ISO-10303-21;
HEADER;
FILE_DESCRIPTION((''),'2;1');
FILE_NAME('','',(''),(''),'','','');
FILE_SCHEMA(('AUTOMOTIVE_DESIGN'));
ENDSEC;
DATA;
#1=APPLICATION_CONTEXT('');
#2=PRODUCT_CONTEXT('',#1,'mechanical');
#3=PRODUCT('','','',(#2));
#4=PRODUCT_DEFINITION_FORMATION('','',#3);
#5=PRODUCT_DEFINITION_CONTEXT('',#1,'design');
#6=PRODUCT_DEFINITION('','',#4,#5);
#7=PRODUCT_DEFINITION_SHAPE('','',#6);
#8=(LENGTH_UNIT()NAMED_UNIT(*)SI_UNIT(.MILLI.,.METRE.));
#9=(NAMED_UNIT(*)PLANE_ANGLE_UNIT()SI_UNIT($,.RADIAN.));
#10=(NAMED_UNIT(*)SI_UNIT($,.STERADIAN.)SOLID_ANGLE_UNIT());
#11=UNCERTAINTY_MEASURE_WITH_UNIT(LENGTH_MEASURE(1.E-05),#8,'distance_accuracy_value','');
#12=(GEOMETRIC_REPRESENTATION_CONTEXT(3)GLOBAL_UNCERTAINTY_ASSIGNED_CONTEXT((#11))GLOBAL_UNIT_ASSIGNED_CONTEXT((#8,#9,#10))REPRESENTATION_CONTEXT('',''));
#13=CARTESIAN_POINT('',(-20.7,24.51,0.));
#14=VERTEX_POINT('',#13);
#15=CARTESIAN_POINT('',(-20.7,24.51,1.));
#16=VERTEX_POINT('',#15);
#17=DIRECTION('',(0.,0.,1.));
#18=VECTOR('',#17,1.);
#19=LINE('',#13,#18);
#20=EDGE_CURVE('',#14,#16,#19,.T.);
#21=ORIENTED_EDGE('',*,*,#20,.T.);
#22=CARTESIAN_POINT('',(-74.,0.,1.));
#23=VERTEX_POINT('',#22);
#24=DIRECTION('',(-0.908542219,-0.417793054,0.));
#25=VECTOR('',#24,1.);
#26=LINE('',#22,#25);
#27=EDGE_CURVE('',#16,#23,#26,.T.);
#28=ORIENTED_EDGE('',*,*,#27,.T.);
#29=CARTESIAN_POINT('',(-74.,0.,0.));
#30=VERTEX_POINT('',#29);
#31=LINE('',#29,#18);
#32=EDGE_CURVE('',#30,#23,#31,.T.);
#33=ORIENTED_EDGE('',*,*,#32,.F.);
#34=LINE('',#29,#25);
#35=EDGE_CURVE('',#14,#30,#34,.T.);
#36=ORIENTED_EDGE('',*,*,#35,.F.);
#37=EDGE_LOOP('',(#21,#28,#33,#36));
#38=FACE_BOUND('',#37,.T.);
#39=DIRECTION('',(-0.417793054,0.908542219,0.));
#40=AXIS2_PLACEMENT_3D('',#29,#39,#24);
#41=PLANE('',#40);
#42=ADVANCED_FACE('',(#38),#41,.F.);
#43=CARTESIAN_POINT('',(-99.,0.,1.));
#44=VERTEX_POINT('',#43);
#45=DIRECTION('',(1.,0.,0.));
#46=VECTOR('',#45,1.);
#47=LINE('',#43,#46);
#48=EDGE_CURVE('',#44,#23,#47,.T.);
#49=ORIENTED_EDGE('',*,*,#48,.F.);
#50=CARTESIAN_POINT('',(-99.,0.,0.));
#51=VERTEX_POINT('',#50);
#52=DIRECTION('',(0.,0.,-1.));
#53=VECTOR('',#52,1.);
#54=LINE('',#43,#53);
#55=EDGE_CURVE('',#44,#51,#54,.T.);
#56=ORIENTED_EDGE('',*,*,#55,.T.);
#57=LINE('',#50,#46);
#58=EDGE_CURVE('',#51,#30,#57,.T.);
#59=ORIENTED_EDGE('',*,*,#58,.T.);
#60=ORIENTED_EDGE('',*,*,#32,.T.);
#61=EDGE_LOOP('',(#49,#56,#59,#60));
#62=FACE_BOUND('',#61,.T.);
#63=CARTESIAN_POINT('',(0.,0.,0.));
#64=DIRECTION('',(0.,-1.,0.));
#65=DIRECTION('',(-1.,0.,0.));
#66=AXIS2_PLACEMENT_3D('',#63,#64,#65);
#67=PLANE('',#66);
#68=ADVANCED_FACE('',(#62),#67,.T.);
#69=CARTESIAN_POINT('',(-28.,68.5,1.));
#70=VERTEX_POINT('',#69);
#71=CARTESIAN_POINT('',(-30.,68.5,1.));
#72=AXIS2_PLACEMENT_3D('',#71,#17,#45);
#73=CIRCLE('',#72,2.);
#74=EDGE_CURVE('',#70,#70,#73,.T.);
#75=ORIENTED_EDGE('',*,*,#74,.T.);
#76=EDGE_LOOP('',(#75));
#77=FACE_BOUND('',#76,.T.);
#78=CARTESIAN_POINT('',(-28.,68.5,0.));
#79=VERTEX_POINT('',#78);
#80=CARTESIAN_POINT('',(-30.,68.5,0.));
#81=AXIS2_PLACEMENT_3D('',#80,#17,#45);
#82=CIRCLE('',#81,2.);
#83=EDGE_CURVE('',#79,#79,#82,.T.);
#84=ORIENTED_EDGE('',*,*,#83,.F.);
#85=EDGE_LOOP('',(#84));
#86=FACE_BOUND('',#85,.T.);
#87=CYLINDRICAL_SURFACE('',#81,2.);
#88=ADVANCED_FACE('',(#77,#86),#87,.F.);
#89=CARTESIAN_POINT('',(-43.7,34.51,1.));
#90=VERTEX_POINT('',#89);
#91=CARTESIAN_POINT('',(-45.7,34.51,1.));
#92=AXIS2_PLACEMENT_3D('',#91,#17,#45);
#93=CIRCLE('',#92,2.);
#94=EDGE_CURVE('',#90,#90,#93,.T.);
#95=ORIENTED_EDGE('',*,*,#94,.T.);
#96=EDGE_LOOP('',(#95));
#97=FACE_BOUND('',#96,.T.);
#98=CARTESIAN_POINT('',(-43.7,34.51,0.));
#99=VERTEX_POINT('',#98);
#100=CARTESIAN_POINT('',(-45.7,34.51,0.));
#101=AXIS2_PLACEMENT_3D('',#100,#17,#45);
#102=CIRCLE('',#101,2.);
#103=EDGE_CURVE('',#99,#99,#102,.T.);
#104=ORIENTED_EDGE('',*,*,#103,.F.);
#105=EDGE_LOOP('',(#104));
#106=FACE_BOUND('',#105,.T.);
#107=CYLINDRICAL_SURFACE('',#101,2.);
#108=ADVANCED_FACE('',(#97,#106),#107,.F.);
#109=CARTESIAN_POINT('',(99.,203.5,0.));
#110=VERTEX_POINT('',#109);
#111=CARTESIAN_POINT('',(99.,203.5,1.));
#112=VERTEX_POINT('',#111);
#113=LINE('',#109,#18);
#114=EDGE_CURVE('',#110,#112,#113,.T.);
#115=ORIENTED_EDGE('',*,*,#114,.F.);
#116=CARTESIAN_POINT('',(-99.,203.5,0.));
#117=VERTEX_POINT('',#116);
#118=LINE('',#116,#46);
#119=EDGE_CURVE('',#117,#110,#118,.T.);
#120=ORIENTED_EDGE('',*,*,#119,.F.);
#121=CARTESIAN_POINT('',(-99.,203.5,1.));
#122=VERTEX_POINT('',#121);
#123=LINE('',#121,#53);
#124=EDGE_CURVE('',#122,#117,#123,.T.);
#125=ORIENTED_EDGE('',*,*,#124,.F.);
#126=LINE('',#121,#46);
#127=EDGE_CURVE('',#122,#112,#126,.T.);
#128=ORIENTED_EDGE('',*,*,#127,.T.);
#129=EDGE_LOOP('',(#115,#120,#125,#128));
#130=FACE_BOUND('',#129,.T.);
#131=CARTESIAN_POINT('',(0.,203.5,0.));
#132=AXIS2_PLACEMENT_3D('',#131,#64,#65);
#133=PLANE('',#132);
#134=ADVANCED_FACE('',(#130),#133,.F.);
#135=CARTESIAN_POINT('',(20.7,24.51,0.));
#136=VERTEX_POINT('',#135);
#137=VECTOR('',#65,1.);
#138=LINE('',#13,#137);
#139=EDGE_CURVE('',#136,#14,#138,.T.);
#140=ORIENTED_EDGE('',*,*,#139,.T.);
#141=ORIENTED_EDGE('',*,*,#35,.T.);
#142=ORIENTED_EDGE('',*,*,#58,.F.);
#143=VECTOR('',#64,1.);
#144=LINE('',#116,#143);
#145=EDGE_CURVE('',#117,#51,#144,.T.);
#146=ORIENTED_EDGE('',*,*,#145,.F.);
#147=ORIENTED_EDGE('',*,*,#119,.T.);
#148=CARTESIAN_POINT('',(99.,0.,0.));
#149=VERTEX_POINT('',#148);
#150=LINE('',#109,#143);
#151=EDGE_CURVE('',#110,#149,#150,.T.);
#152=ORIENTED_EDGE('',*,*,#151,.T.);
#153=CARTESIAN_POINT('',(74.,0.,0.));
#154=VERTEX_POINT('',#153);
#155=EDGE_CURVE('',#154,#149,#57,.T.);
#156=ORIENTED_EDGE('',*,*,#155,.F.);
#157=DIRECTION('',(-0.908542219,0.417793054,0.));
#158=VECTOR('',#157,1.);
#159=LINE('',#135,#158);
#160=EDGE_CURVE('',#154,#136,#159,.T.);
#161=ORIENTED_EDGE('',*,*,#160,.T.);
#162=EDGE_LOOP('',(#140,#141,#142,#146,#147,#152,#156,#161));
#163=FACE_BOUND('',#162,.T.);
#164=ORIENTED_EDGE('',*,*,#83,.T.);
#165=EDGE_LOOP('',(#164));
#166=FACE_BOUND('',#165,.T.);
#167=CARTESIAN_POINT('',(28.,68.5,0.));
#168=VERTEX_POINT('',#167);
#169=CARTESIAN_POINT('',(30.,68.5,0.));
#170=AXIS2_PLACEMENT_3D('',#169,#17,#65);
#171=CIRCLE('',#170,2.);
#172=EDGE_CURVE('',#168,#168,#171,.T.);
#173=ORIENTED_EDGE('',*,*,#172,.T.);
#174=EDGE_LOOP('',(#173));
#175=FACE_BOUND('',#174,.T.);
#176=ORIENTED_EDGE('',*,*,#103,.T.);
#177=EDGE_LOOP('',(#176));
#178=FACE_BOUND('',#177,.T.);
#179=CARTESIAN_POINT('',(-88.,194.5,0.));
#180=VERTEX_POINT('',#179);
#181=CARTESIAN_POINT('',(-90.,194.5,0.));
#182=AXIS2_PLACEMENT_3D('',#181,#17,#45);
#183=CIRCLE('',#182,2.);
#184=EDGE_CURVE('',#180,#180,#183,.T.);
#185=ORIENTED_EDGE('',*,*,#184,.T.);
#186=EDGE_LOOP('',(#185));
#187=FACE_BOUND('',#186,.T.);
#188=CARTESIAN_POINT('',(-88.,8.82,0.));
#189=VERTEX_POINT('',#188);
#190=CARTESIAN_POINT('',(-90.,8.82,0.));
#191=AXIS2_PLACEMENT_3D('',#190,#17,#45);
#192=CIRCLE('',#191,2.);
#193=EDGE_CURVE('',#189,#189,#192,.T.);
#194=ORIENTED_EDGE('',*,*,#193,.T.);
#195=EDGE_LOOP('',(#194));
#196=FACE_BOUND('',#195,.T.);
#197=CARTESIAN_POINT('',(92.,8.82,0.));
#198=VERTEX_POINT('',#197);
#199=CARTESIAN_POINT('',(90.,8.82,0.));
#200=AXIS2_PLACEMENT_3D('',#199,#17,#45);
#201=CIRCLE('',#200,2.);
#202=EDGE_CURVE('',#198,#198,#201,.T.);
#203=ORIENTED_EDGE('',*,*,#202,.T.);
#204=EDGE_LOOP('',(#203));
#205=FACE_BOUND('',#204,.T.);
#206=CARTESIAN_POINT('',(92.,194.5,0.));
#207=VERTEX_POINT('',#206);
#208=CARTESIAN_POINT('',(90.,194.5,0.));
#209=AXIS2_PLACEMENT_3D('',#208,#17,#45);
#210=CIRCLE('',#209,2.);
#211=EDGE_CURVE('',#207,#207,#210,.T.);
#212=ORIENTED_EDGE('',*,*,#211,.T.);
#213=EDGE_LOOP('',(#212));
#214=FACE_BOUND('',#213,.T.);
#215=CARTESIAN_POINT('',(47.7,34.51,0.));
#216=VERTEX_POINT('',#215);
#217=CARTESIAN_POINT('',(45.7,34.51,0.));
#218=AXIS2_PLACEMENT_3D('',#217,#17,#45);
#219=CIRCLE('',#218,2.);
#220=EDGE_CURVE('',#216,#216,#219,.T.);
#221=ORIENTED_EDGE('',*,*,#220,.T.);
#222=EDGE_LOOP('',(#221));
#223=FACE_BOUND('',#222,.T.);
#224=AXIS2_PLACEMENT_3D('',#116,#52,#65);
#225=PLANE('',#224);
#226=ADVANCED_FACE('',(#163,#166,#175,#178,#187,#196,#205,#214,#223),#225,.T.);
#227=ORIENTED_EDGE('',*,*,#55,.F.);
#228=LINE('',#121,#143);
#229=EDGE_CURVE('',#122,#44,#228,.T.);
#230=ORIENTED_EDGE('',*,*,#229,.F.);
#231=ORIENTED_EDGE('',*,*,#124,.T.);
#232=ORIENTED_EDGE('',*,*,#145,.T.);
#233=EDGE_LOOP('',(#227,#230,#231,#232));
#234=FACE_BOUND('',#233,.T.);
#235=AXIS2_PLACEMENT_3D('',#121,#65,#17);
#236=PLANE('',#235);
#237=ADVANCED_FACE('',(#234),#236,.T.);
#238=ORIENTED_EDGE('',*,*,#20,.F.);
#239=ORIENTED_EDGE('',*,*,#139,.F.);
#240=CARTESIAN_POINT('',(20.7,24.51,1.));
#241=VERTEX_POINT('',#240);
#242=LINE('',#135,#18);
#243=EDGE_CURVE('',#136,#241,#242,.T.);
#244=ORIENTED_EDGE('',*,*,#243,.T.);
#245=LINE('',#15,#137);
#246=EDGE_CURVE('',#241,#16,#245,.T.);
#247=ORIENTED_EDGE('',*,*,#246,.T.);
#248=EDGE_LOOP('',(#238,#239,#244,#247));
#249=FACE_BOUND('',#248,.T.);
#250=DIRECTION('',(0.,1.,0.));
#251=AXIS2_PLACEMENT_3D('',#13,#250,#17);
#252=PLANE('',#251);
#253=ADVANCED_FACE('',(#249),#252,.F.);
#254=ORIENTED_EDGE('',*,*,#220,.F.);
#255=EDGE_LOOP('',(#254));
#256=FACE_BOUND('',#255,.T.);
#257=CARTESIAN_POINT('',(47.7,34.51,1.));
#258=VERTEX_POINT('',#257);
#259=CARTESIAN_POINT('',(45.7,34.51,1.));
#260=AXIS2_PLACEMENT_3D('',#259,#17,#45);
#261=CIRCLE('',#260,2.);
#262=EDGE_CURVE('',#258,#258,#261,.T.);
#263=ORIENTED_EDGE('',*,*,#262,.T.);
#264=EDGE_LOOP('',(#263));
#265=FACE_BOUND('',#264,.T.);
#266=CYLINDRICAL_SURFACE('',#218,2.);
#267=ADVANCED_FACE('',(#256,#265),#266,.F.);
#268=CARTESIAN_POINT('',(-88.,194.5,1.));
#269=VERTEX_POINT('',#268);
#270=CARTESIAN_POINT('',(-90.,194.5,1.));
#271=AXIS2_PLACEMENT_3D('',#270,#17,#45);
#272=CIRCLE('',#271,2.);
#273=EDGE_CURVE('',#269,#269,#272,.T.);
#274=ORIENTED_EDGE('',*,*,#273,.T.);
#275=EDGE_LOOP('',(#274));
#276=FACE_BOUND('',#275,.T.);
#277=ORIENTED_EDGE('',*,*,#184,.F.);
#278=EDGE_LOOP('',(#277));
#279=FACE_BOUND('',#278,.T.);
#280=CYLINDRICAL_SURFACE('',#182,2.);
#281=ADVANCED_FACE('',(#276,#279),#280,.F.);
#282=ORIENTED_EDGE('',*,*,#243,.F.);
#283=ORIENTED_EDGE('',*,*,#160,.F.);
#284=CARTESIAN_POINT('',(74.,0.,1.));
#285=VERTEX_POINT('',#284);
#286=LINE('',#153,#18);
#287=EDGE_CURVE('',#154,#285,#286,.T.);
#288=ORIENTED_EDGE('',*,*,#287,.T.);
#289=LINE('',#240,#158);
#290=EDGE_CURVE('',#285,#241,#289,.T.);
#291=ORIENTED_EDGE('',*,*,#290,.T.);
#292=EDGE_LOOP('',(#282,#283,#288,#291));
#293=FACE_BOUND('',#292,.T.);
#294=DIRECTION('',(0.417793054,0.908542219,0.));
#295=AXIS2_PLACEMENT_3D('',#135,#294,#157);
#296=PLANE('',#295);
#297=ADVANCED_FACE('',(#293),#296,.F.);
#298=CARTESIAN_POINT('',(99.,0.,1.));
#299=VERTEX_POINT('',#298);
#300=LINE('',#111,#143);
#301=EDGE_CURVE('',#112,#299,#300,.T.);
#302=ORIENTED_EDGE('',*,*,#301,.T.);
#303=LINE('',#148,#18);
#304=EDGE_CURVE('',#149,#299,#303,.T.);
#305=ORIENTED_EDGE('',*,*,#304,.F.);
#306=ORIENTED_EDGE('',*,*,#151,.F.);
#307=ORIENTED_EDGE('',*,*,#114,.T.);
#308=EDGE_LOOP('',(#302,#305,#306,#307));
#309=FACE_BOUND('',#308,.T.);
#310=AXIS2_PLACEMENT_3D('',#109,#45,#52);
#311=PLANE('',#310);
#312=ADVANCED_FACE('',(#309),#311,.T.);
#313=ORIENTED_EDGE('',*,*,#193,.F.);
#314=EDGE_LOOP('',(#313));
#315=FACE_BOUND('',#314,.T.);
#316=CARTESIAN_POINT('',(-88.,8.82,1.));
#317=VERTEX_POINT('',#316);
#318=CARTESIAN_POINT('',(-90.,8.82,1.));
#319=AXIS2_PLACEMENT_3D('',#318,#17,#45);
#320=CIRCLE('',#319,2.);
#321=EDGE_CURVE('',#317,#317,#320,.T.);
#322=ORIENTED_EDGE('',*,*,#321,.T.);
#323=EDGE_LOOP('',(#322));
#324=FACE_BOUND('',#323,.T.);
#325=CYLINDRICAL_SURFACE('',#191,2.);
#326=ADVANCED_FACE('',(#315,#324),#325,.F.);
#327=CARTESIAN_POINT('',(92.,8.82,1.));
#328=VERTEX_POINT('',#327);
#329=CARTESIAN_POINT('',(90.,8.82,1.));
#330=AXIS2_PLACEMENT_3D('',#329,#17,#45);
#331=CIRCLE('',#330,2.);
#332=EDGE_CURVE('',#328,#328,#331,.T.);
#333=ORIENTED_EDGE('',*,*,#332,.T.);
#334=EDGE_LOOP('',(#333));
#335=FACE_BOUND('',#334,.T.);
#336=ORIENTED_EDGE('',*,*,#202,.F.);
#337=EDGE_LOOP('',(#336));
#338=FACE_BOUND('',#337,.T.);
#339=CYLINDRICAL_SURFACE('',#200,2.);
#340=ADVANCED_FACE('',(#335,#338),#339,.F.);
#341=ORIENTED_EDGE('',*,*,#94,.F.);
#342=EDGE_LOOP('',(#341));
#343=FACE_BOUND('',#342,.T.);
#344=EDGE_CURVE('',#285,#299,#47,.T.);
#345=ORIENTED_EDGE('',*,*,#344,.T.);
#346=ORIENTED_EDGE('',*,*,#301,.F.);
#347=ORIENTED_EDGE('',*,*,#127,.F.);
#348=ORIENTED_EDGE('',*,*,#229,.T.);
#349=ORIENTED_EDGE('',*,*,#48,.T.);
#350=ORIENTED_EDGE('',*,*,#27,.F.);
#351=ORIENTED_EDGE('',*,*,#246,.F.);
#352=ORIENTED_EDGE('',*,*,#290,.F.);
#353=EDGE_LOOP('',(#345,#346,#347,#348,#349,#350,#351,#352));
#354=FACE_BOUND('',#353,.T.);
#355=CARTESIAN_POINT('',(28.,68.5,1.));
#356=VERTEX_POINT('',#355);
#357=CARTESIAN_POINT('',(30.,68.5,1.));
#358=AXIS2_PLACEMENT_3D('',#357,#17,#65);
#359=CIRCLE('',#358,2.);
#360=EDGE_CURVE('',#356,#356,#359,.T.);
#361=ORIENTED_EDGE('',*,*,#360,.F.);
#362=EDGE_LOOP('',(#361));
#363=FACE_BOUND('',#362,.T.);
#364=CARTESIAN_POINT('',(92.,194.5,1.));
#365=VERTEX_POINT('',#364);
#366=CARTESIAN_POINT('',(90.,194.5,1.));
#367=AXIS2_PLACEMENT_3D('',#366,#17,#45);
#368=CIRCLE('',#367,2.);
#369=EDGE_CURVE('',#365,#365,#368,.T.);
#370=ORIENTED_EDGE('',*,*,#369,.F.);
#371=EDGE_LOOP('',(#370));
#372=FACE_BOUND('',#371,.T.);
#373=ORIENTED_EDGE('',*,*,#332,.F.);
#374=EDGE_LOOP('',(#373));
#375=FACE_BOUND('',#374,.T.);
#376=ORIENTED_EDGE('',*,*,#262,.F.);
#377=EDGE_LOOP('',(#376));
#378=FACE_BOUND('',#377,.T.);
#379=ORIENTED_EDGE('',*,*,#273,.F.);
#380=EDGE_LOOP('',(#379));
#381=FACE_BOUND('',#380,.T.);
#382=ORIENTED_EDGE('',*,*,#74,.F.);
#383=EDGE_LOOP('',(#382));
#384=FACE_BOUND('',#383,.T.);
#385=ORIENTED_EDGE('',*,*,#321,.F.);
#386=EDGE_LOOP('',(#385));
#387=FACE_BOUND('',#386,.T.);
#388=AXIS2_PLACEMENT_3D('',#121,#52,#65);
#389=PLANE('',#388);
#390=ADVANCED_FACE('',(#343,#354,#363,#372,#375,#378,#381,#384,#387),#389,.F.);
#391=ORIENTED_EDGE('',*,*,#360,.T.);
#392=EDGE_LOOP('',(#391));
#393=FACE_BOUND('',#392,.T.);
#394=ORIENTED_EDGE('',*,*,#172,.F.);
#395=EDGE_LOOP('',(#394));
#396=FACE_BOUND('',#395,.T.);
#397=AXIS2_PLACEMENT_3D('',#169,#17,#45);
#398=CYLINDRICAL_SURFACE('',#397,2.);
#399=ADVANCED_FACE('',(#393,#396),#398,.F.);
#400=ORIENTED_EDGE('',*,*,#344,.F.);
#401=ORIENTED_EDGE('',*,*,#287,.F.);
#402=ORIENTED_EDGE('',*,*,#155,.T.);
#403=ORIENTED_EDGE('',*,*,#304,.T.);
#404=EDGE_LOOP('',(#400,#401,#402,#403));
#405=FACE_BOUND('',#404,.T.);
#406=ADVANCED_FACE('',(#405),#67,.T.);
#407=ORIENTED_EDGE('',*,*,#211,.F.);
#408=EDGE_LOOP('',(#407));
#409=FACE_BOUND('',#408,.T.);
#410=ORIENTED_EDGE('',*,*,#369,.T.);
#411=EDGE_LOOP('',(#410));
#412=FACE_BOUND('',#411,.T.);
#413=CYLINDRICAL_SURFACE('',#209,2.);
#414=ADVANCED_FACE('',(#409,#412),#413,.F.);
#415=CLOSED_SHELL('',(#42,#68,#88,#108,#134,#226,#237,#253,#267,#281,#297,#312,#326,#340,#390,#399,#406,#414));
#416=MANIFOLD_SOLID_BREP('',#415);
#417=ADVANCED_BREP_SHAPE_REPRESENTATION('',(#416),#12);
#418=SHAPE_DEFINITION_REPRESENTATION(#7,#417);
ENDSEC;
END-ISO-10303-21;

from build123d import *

# Parameters (mm, degrees)
ESQUISSE2_W               = 198
ESQUISSE2_H               = 1
T_LE_DE_BASE_PLI_E1_DEPTH = 203.5
ESQUISSE7_R               = 2
ENL_V_MAT_EXTRU_1_DEPTH   = 227.305656138
ENL_V_MAT_EXTRU_2_DEPTH   = 227.305656138


# Sheet-metal steps are written as plain solids
with BuildPart() as part:
    # Esquisse2 → Tôle de base pliée1 (new body)
    with BuildSketch(Plane(origin=(0, 0, 0), x_dir=(1, 0, 0), z_dir=(0, 1, 0))):
        with Locations((0, -0.5)):
            Rectangle(ESQUISSE2_W, ESQUISSE2_H)
    extrude(amount=T_LE_DE_BASE_PLI_E1_DEPTH)

    # Esquisse7 → Enlèv. mat.-Extru.1 (cut, through all)
    with BuildSketch(Plane.XY.offset(1)):
        with Locations((-90, 194.5)):
            Circle(ESQUISSE7_R)
        with Locations((90, 194.5)):
            Circle(ESQUISSE7_R)
        with Locations((-90, 8.82)):
            Circle(ESQUISSE7_R)
        with Locations((90, 8.82)):
            Circle(ESQUISSE7_R)
        with Locations((-45.7, 34.51)):
            Circle(ESQUISSE7_R)
        with Locations((45.7, 34.51)):
            Circle(ESQUISSE7_R)
        with Locations((-30, 68.5)):
            Circle(ESQUISSE7_R)
        with Locations(Location((30, 68.5, 0), (0, 0, 180))):
            Circle(ESQUISSE7_R)
    extrude(amount=-ENL_V_MAT_EXTRU_1_DEPTH, mode=Mode.SUBTRACT)

    # Esquisse10 → Enlèv. mat.-Extru.2 (cut, through all)
    with BuildSketch(Plane.XY.offset(1)):
        Polygon((-74, 0), (-20.7, 24.51), (20.7, 24.51), (74, 0), align=None)
    extrude(amount=-ENL_V_MAT_EXTRU_2_DEPTH, mode=Mode.SUBTRACT)


solid = part.part
